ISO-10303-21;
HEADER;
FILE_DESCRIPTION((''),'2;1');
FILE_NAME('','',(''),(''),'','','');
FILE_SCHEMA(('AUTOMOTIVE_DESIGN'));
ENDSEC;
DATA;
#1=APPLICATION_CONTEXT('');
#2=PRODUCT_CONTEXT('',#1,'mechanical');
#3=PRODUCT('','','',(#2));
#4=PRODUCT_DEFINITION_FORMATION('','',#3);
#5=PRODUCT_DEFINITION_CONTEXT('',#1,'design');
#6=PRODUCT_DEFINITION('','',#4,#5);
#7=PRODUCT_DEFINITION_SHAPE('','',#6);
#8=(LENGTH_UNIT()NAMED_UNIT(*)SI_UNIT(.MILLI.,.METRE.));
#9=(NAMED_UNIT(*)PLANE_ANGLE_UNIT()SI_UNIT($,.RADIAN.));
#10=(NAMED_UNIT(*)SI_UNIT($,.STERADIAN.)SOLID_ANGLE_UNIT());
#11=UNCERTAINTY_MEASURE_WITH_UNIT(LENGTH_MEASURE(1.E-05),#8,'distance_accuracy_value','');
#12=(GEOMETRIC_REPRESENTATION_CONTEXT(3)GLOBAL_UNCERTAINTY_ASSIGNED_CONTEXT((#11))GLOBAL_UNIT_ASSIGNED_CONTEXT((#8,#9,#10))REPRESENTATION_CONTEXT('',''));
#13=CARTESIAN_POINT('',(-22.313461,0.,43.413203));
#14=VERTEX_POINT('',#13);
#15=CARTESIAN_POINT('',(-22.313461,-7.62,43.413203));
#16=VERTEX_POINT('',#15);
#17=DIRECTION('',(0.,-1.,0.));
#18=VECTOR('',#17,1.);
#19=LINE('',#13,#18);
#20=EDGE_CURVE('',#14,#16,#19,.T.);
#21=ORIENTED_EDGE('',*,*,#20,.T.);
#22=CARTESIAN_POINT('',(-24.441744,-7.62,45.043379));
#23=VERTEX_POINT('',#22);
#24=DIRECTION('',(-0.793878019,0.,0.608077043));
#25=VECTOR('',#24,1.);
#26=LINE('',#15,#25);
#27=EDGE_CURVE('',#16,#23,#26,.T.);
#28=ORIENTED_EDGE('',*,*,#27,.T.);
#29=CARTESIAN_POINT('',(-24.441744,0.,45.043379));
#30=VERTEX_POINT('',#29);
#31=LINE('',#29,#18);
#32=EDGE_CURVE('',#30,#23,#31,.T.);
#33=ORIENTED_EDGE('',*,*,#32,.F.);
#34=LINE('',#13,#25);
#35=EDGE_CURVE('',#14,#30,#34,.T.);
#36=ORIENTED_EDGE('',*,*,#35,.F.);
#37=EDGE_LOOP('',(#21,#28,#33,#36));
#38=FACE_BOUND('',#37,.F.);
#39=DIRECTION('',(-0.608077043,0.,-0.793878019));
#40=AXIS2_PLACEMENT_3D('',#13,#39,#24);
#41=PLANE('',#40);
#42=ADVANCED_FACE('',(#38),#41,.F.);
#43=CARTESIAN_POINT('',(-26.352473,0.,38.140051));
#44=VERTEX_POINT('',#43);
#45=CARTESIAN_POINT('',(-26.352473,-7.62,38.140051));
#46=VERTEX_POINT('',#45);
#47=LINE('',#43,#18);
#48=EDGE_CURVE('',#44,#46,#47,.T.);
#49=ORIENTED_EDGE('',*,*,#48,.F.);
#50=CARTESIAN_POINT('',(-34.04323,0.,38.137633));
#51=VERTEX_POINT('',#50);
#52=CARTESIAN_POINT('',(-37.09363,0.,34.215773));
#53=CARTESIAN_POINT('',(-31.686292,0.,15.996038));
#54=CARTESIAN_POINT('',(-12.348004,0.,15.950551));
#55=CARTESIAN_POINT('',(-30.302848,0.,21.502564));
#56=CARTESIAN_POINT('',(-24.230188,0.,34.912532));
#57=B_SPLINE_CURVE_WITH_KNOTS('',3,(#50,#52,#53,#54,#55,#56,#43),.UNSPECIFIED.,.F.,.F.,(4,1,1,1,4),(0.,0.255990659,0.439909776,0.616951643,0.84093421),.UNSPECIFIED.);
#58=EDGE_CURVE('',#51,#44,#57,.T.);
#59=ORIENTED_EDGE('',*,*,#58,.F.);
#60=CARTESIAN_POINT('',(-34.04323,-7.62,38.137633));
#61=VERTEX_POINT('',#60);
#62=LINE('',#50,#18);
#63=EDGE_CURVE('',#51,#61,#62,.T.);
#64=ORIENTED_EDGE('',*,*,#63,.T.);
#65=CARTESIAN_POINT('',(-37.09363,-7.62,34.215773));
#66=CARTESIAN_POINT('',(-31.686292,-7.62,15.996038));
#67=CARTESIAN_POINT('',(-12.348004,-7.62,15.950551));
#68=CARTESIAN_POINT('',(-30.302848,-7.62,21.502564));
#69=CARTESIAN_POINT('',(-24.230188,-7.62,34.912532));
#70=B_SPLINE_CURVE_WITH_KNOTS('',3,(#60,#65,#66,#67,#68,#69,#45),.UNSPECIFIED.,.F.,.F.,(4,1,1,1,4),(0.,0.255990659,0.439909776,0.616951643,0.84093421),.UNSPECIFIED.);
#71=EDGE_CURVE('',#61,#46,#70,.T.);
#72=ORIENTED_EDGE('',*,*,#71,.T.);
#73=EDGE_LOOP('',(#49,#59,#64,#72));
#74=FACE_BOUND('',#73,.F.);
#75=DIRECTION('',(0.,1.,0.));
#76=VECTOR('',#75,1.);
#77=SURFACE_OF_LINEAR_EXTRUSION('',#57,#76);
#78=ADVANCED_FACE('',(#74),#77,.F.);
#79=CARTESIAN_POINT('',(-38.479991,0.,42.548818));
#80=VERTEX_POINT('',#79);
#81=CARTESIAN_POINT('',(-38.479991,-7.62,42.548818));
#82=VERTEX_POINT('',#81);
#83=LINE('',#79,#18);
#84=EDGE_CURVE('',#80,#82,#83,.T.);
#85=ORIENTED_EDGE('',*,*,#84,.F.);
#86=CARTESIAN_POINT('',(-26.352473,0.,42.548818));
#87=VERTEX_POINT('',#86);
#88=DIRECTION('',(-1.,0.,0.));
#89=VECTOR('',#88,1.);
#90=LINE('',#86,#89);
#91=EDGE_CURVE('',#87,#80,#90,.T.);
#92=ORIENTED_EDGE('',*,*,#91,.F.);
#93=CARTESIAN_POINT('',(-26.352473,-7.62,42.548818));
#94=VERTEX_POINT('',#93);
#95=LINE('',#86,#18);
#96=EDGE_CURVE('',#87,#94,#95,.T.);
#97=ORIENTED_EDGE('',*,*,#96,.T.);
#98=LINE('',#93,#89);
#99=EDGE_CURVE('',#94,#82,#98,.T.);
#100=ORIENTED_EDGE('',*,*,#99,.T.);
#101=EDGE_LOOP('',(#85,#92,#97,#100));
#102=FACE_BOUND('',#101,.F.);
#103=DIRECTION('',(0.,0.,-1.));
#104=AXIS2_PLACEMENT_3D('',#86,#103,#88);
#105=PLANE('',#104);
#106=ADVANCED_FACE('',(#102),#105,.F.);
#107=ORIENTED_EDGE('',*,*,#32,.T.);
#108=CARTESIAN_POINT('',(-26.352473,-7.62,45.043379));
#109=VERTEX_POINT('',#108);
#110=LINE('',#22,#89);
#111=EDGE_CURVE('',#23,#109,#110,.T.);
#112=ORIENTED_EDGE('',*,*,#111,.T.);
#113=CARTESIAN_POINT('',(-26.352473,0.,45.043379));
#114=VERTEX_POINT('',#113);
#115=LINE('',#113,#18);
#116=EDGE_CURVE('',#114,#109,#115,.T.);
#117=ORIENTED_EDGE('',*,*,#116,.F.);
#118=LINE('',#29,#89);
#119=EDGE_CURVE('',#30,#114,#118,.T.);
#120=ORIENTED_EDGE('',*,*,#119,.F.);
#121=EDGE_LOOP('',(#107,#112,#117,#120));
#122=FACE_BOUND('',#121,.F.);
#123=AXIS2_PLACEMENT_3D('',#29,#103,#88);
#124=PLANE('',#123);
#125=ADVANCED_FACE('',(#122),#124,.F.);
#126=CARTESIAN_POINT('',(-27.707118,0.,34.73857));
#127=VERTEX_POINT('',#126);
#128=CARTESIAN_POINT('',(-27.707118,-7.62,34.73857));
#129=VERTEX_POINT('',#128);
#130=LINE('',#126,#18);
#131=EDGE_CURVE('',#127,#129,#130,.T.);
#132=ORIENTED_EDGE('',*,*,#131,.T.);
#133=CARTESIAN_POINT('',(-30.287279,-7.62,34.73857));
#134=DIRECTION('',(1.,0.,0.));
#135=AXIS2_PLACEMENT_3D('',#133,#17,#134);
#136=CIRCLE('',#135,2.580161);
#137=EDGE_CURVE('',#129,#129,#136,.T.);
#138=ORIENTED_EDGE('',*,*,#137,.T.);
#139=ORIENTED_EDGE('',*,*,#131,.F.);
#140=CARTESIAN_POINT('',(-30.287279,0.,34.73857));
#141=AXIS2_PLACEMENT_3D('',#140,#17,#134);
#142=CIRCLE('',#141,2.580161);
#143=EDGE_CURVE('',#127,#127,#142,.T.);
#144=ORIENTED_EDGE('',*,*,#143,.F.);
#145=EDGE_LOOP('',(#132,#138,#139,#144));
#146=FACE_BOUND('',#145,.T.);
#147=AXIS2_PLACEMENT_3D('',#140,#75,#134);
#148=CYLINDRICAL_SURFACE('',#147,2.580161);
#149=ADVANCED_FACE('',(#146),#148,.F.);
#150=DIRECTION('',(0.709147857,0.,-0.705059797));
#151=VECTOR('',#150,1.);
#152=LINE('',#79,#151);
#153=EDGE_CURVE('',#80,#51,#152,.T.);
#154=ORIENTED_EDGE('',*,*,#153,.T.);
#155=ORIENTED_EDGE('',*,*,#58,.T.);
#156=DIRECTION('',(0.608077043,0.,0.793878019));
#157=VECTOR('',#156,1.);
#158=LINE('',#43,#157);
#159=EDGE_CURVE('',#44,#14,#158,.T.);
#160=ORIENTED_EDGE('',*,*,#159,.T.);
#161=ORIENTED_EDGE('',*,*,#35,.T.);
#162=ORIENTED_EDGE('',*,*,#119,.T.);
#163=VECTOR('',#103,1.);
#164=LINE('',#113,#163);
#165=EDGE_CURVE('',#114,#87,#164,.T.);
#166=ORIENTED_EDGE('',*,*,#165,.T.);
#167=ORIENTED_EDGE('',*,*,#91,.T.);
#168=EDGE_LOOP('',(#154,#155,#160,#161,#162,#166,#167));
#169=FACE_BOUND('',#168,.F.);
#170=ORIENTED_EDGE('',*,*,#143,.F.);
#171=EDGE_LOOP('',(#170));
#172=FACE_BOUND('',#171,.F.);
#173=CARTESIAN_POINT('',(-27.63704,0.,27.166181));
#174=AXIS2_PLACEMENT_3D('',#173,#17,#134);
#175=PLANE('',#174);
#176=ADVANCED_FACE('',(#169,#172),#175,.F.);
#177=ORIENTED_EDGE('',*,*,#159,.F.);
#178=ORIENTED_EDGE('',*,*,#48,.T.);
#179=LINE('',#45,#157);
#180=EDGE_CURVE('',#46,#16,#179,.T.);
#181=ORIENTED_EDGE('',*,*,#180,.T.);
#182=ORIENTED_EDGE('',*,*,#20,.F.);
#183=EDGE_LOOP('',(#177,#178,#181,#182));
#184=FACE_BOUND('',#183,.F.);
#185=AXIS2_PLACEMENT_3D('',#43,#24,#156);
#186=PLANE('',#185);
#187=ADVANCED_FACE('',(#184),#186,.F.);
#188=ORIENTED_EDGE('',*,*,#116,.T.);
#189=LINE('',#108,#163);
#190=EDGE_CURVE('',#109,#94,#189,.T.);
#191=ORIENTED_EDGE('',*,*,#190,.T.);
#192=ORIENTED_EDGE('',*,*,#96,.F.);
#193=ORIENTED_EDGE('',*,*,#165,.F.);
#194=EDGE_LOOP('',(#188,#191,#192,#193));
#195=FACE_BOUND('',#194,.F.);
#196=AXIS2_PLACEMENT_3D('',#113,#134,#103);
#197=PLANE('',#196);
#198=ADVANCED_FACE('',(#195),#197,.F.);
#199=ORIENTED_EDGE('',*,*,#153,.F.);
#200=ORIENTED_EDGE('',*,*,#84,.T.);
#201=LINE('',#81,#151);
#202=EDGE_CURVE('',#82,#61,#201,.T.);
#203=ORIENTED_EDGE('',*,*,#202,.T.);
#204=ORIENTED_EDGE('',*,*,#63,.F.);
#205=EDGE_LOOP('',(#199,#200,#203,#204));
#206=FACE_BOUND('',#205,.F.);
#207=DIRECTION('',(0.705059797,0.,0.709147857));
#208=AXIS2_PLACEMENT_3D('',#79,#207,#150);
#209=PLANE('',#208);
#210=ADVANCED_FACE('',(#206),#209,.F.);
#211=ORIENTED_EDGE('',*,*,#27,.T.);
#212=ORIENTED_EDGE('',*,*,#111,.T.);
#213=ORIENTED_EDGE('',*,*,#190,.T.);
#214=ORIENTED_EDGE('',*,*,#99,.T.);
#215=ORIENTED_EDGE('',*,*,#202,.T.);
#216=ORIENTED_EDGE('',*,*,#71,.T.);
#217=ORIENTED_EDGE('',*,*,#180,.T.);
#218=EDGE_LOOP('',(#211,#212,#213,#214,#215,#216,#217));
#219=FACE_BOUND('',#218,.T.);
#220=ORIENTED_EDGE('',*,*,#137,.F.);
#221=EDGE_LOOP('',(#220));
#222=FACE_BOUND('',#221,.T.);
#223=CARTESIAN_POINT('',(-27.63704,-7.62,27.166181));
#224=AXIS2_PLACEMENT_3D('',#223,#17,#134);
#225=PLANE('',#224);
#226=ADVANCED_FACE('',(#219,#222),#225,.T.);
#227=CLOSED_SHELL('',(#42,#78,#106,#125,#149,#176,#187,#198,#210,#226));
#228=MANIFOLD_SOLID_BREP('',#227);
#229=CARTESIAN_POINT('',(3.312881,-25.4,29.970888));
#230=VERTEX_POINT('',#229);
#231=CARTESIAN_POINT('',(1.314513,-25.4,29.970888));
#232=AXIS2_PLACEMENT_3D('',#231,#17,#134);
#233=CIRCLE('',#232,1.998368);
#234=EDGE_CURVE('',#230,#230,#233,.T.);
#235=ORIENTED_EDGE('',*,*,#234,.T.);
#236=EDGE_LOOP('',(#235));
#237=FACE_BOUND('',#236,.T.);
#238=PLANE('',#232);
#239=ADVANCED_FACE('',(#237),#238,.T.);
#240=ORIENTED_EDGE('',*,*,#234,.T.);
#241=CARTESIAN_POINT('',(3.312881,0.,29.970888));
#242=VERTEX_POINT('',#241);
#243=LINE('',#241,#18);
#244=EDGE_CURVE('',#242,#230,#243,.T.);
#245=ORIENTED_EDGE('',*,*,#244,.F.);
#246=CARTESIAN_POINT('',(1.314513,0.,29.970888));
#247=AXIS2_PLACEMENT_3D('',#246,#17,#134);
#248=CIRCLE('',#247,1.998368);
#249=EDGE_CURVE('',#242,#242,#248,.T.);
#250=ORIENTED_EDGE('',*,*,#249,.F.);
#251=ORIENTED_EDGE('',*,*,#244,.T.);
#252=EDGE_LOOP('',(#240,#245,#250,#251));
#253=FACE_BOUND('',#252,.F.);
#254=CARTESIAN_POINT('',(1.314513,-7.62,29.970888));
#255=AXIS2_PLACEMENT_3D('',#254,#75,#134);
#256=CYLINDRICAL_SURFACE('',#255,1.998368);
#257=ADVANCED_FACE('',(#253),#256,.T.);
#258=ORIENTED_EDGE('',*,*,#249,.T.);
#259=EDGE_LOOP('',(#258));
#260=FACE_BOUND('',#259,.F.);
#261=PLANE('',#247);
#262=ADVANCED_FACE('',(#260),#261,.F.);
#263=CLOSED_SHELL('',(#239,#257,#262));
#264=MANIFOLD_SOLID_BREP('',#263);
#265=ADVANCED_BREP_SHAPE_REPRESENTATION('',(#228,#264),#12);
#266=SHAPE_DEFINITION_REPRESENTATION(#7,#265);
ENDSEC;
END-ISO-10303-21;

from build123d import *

# Parameters (mm, degrees)
F0_R     = 2.5801610902
F1_DEPTH = 7.62
F0_R_2   = 1.9983681338
F2_DEPTH = 17.78


with BuildPart() as f1:
    # F0 (on Front) → F1 (new body)
    with BuildSketch(Plane.XZ):
        with BuildLine():
            add(Edge.make_bspline(
                [(-26.3524726033, 38.1400510669), (-27.8596560993, 40.4321397588), (-32.1477926679, 40.574573371), (-34.0432301164, 38.1376333535)],
                knots=[0.8409342104, 0.8409342104, 0.8409342104, 0.8409342104, 1, 1, 1, 1], degree=3))
            add(Edge.make_bspline(
                [(-34.0432301164, 38.1376333535), (-37.0936300965, 34.2157725783), (-31.6862921183, 15.9960381182), (-12.3480035084, 15.9505507078), (-30.3028477282, 21.5025635075), (-24.2301882963, 34.912531741), (-26.3524726033, 38.1400510669)],
                knots=[0, 0, 0, 0, 0.255990659, 0.4399097759, 0.6169516429, 0.8409342104, 0.8409342104, 0.8409342104, 0.8409342104], degree=3))
        make_face()
        with Locations((-30.2872788161, 34.7385704517)):
            Circle(F0_R, mode=Mode.SUBTRACT)
        with BuildLine():
            Line((-38.4799912572, 42.5488176732), (-34.0432301164, 38.1376333535))
            add(Edge.make_bspline(
                [(-26.3524726033, 38.1400510669), (-27.8596560993, 40.4321397588), (-32.1477926679, 40.574573371), (-34.0432301164, 38.1376333535)],
                knots=[0.8409342104, 0.8409342104, 0.8409342104, 0.8409342104, 1, 1, 1, 1], degree=3))
            Line((-26.3524726033, 38.1400510669), (-22.3134607077, 43.4132032096))
            Line((-22.3134607077, 43.4132032096), (-24.4417442845, 45.043378568))
            Line((-24.4417442845, 45.043378568), (-26.3524726033, 42.5488176732))
            Line((-26.3524726033, 42.5488176732), (-38.4799912572, 42.5488176732))
        make_face()
        Polygon((-26.3524726033, 45.043378568), (-26.3524726033, 42.5488176732), (-24.4417442845, 45.043378568), align=None)
    extrude(amount=F1_DEPTH)


with BuildPart() as f1b:
    # F0 (on Front) → F1, piece 2 (new body)
    with BuildSketch(Plane.XZ):
        with Locations((1.3145125704, 29.9708880484)):
            Circle(F0_R_2)
    extrude(amount=F1_DEPTH)

    # F2 (add): a face of the model
    f2_faces = [f1b.faces().sort_by_distance(p)[0] for p in [
        (1.3145125704, -7.62, 29.9708880484),
    ]]
    extrude(f2_faces, amount=F2_DEPTH)


solid = Compound([f1.part, f1b.part])
